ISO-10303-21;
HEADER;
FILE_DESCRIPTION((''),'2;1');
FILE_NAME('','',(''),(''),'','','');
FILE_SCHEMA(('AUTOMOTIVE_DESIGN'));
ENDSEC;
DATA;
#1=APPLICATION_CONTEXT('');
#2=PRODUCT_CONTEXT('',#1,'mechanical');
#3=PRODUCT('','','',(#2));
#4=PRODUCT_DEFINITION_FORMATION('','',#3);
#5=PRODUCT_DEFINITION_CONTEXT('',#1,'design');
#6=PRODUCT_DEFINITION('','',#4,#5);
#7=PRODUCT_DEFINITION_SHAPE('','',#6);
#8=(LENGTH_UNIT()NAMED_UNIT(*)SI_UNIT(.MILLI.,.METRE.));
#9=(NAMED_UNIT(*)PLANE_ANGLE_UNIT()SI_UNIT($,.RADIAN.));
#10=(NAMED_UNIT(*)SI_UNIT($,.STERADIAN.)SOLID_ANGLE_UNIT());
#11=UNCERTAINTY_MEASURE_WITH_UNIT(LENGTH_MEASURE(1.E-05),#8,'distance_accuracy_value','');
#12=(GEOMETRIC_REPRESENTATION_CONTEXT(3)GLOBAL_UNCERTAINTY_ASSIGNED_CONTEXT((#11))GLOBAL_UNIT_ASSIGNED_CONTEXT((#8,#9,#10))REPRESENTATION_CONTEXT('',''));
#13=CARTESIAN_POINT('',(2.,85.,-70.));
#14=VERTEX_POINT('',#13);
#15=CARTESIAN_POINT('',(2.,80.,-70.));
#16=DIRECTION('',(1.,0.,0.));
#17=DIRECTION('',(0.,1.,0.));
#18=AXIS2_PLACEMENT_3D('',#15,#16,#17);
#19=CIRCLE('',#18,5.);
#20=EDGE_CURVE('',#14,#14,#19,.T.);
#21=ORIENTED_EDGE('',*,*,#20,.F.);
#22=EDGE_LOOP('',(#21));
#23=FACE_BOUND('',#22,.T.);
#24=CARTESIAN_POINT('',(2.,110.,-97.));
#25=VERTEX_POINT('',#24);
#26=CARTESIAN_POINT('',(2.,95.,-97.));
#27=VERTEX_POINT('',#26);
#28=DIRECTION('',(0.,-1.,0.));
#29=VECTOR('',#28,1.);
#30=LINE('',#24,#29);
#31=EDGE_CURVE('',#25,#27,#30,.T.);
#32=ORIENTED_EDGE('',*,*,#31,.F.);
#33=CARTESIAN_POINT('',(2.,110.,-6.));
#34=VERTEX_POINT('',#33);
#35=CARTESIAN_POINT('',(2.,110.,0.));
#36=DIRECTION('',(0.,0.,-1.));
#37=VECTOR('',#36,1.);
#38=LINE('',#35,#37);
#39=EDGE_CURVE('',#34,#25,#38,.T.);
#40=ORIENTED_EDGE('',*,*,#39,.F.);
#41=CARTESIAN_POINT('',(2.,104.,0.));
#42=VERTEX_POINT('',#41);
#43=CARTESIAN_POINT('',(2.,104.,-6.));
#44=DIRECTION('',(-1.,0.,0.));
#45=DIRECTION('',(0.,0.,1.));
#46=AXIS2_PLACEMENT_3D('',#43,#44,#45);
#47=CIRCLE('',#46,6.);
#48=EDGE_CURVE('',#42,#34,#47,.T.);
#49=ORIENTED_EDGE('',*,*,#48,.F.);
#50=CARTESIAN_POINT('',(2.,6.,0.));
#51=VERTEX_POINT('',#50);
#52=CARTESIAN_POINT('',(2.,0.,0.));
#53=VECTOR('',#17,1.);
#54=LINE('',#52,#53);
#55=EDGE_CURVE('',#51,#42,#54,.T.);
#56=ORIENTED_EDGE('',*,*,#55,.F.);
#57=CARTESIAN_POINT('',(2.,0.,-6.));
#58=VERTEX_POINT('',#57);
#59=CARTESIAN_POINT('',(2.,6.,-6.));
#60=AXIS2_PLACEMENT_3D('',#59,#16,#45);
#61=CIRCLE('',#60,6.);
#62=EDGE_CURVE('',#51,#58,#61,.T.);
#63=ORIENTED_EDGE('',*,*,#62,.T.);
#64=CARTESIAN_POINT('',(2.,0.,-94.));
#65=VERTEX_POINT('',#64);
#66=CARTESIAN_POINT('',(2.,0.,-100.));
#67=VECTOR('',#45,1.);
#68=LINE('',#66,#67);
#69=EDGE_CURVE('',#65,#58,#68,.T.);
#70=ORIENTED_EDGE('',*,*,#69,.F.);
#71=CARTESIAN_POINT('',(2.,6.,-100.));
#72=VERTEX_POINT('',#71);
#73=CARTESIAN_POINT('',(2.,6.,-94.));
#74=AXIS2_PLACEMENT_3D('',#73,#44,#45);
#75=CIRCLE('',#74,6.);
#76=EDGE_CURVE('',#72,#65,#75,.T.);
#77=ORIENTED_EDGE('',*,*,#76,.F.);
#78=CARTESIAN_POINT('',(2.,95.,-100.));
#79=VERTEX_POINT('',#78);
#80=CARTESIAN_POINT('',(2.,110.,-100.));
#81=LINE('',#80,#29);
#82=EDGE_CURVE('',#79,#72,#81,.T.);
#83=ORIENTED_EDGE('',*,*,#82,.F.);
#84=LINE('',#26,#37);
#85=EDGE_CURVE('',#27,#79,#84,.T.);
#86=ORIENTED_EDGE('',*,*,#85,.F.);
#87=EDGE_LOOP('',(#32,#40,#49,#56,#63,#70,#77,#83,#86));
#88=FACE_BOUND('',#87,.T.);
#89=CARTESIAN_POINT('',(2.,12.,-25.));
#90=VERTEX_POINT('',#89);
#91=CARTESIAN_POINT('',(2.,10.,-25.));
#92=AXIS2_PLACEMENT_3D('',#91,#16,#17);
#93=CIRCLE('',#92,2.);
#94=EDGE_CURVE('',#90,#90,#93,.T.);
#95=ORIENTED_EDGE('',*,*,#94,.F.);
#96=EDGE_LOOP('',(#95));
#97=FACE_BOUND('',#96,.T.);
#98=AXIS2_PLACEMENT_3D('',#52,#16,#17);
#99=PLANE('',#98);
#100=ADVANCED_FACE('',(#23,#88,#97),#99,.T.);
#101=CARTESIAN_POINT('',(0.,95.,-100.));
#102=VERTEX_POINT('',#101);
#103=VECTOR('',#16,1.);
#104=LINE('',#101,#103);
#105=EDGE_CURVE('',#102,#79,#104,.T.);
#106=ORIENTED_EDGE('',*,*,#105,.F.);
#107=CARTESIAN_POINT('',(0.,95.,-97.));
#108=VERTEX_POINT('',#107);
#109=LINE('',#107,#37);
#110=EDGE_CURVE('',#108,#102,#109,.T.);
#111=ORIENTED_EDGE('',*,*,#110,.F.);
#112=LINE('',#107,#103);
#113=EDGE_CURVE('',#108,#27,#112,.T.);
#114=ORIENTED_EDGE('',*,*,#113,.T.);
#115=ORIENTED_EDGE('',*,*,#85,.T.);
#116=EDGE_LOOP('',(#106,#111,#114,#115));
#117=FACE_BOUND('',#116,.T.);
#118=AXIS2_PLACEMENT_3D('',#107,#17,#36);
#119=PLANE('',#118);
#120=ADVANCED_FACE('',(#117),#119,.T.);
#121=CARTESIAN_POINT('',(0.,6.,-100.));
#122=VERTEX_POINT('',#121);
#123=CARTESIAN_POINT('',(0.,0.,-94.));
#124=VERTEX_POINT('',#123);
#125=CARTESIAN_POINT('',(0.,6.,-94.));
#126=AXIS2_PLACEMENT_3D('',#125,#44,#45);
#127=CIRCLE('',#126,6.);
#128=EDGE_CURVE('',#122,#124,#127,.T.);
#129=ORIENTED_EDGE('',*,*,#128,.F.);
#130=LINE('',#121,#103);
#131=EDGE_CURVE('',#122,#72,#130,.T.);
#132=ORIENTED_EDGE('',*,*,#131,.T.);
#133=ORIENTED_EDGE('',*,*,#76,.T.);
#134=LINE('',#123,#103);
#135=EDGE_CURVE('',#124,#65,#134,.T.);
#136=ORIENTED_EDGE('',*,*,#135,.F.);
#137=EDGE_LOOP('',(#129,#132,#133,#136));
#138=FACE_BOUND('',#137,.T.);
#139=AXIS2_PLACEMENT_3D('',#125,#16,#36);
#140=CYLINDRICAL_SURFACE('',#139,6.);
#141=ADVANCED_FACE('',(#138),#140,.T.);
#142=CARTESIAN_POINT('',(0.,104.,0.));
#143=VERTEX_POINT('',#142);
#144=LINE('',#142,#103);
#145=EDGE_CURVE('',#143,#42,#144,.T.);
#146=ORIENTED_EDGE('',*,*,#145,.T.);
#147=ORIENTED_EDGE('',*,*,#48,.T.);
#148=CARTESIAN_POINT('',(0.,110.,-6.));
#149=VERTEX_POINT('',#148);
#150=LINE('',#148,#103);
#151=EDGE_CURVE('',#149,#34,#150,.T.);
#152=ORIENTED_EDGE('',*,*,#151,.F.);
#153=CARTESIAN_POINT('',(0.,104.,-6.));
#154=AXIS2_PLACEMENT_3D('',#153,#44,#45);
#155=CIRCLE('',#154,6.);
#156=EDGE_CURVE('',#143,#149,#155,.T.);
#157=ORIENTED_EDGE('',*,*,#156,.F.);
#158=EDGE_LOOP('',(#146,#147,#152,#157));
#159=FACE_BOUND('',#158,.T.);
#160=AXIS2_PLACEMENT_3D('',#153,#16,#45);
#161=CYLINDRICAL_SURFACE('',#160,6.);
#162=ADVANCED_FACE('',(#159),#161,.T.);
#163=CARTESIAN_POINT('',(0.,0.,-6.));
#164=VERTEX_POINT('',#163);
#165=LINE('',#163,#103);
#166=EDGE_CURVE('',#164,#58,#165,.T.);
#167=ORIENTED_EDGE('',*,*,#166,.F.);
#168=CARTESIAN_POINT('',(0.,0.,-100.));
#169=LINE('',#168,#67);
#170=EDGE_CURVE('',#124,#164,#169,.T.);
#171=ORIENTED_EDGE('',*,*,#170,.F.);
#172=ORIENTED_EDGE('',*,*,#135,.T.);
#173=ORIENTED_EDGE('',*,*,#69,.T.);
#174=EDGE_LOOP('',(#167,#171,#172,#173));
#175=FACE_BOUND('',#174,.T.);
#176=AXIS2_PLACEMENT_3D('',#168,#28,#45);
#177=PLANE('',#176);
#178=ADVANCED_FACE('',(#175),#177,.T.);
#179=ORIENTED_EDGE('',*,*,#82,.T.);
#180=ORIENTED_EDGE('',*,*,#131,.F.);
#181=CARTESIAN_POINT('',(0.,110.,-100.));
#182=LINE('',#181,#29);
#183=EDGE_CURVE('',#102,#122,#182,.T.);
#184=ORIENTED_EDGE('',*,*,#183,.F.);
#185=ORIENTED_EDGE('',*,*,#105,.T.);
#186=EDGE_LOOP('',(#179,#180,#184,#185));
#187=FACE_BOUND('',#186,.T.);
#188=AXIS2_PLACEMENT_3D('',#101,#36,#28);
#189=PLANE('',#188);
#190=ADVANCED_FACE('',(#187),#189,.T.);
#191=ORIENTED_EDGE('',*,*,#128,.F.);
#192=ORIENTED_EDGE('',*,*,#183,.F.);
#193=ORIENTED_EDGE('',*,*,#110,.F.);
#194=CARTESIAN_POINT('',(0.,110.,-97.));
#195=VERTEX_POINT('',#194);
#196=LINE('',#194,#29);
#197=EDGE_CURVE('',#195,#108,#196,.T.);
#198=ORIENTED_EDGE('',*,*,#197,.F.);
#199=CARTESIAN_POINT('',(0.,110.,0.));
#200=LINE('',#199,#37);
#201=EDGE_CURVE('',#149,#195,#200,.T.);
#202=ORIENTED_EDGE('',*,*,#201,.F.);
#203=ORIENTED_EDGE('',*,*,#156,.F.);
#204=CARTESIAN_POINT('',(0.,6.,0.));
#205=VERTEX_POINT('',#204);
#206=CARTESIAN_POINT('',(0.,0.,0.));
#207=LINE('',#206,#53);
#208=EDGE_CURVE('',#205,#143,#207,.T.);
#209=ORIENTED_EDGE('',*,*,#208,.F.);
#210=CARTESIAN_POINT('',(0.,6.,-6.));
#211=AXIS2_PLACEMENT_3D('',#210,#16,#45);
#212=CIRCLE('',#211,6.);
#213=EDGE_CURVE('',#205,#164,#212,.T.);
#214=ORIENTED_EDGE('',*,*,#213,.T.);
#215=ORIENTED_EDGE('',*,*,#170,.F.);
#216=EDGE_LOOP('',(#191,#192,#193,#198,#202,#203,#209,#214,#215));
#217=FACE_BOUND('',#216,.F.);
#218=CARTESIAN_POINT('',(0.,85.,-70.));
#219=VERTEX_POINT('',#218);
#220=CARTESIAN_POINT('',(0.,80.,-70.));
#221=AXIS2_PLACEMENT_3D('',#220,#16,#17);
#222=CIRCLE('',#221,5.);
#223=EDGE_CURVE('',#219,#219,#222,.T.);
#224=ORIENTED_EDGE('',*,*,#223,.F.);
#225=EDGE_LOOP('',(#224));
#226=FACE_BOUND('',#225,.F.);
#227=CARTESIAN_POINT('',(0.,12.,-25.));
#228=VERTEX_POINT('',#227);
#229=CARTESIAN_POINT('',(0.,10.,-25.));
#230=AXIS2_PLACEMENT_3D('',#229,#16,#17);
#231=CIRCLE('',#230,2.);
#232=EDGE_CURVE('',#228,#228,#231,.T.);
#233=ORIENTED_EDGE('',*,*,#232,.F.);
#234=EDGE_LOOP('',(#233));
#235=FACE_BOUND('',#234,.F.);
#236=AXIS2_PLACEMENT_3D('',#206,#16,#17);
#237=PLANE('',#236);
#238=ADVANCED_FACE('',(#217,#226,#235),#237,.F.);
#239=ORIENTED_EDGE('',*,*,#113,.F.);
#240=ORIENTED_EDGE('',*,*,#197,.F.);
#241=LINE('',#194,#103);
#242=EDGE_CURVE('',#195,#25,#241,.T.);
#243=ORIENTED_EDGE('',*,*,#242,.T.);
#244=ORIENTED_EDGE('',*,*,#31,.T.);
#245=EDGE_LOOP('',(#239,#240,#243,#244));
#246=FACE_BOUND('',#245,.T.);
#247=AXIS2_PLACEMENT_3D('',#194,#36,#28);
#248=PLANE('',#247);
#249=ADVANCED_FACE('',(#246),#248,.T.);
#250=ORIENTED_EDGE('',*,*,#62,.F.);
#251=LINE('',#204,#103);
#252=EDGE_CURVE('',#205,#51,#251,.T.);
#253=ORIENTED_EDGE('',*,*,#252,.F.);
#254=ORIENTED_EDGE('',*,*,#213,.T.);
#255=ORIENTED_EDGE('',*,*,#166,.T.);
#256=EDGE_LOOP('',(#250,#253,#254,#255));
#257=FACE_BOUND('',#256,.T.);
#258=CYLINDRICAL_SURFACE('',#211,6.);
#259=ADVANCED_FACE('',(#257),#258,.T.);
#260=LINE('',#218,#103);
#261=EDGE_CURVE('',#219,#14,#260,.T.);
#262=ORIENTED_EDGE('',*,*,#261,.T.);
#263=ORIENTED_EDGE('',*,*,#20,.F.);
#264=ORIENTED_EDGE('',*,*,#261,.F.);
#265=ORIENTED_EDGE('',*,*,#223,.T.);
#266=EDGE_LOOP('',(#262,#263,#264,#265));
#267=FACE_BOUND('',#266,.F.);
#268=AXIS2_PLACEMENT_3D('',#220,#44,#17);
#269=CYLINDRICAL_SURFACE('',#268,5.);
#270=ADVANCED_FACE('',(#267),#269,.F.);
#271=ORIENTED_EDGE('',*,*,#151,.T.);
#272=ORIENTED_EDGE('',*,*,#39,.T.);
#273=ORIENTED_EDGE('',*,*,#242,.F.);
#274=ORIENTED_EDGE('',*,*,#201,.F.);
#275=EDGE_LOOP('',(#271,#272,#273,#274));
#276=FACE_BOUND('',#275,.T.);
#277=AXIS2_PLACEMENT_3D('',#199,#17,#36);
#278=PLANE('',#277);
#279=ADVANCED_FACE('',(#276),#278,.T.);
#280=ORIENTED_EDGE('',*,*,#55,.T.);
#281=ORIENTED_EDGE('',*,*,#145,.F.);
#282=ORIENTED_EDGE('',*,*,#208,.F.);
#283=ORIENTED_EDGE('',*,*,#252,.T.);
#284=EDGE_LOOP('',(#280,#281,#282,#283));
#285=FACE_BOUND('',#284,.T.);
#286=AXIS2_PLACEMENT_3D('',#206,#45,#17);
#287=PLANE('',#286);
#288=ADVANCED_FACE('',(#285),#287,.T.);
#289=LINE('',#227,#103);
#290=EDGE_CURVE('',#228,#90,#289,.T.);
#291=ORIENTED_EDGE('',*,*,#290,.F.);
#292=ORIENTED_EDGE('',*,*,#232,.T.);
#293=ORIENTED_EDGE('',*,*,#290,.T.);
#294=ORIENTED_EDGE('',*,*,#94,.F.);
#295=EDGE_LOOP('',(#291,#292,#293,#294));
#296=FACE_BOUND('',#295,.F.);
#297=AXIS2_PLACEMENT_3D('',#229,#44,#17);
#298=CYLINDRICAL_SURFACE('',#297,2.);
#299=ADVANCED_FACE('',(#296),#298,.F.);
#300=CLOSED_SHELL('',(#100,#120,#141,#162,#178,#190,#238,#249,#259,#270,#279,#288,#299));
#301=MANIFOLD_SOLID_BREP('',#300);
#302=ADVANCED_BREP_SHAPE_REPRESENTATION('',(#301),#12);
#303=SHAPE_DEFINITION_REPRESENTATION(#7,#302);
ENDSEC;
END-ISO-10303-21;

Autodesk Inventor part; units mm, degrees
ref_plane "YZ Plane" through (0, 0, 0) normal (1, 0, 0) x (0, 1, 0)
ref_plane "XZ Plane" through (0, 0, 0) normal (0, 1, 0) x (-1, 0, 0)
ref_plane "XY Plane" through (0, 0, 0) normal (0, 0, 1) x (1, 0, 0)
sketch "Sketch1" plane through (0, 0, 0) normal (1, 0, 0) x (0, 1, 0)
  line L0 (0, 0) -> (110, 0)
  line L1 (110, 0) -> (110, -100)
  line L2 (110, -100) -> (0, -100)
  line L3 (0, -100) -> (0, 0)
  line L4 (110, -97) -> (95, -97)
  line L5 (95, -97) -> (95, -100)
  line L6 (95, -100) -> (110, -100)
  line L7 (110, -100) -> (110, -97)
  circle A0 centre (10, -25) radius 2
  circle A1 centre (80, -70) radius 5
  point P0 (102.5, -100)
  point P1 (102.5, -97)
  point P2 (110, -98.5)
  point P3 (95, -98.5)
  dimension "d0" = 110
  dimension "d1" = 100
  dimension "d2" = 3
  dimension "d3" = 15
  dimension "d4" = 4
  dimension "d5" = 10
  dimension "d6" = 25
  dimension "d9" = 10
  dimension "d10" = 30
  dimension "d11" = 30
extrude "Plate2" add sketch "Sketch1" along normal blind 2 contours L0 L1 L4 L5 L2 L3
fillet "Corner Round2" radius 6 3 edges at (1, 110, 0) (1, 0, 0) (1, 0, -100)
equation "\"d12\" = Thickness"
equation "\"BendRadius\" = Thickness"
equation "\"BendReliefWidth\" = Thickness"
equation "\"BendReliefDepth\" = 0.5 * Thickness"
equation "\"CornerReliefSize\" = 4 * Thickness"
equation "\"MinimumRemnant\" = 2 * Thickness"
equation "\"TransitionRadius\" = BendRadius"
equation "\"JacobiRadiusSize\" = BendRadius"
equation "\"GapSize\" = Thickness"
equation "\"Thickness\" = 2"
properties part number "WI-Cover" material "Steel"
